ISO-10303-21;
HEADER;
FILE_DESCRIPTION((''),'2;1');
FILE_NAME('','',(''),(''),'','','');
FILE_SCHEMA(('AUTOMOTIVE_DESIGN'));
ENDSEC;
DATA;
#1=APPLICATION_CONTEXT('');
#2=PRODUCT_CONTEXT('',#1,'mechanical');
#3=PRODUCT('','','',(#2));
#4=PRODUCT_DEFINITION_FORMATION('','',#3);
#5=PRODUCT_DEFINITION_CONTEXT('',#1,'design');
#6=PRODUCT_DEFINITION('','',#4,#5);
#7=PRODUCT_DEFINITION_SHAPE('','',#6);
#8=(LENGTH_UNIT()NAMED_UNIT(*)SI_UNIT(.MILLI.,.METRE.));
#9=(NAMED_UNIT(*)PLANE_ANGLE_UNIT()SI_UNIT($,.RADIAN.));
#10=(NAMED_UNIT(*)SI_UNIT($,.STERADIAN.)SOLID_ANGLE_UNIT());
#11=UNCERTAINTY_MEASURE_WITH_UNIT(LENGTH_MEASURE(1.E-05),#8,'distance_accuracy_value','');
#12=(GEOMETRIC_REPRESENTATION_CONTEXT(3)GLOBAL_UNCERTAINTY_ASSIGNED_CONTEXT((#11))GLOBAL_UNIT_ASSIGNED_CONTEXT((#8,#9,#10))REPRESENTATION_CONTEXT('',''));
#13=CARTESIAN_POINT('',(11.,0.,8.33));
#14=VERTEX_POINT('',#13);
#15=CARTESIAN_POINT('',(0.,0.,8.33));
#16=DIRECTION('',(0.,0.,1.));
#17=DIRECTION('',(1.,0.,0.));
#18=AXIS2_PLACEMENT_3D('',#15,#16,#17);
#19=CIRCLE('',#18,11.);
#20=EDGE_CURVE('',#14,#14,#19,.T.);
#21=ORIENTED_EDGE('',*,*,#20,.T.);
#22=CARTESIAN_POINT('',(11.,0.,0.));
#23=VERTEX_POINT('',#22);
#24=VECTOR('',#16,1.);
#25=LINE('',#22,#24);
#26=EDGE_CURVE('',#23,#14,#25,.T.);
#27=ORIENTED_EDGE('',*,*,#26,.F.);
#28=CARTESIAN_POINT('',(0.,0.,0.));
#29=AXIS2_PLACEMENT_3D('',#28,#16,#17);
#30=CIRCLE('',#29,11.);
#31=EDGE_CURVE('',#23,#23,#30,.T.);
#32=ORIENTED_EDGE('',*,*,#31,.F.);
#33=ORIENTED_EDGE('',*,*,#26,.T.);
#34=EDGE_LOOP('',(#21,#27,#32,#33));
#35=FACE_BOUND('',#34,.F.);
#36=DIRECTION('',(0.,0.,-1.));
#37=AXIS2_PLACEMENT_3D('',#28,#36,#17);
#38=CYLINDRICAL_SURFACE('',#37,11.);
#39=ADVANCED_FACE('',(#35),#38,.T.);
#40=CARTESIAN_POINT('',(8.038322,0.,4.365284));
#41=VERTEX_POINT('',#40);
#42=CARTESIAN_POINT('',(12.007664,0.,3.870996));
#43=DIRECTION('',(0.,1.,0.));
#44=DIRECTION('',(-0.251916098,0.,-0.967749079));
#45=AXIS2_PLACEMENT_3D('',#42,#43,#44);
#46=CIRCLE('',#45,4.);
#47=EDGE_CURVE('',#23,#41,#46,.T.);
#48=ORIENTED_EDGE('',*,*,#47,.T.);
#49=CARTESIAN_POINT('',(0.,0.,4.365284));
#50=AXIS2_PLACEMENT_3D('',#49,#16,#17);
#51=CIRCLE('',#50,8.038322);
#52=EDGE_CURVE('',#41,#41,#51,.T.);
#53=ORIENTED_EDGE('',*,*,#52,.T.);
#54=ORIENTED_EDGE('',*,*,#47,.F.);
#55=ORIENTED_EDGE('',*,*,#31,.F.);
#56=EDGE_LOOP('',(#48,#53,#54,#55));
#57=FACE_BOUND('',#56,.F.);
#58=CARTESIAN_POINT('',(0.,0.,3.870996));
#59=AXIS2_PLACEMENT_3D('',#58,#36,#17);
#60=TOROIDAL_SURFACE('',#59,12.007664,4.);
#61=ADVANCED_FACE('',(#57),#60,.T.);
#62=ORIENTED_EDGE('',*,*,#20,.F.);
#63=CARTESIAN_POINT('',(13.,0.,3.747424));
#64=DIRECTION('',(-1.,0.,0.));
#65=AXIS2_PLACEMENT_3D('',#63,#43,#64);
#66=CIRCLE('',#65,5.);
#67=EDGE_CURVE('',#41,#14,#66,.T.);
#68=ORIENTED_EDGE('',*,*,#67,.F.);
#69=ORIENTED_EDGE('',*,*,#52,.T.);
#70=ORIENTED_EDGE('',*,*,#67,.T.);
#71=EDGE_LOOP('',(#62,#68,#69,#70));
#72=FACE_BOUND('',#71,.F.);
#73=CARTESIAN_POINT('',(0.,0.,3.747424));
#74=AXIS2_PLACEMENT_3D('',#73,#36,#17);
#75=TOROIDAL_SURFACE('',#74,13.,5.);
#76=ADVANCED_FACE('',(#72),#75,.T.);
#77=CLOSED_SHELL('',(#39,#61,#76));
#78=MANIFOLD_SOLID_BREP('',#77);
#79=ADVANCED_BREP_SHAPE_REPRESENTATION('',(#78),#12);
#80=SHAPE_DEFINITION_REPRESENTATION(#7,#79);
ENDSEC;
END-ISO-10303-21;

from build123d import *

# Parameters (mm, degrees)
F0_R     = 11
F0_R_2   = 8
F1_DEPTH = 8.33
F2_R     = 11.5325347533
F2_R_2   = 11
F3_DEPTH = 25


# Not quite as in the source:
# - a fillet or chamfer that OpenCascade refuses, or shapes differently, is made with other operations: its cross-section is extruded or revolved along the edge and cut away or added


with BuildPart() as f1:
    # F0 (on Top) → F1 (new body)
    with BuildSketch(Plane.XY):
        Circle(F0_R)
        Circle(F0_R_2, mode=Mode.SUBTRACT)
    extrude(amount=F1_DEPTH)

    # F2 (on face) → F3 (cut)
    with BuildSketch(Plane.XY.offset(8.33)):
        Circle(F2_R)
        Circle(F2_R_2, mode=Mode.SUBTRACT)
    extrude(amount=-F3_DEPTH, mode=Mode.SUBTRACT)

    # F4: fillet of radius 5 on 1 edges, made by hand

    # F4_s1 → F4_t2 (revolve, cut)
    with BuildSketch(Plane.XZ):
        with BuildLine():
            ThreePointArc((8, 3.747424305), (8.8166998673, 6.4860370926), (11, 8.33))
            Line((11, 8.33), (8, 8.33))
            Line((8, 8.33), (8, 3.747424305))
        make_face()
    revolve(axis=Axis((0, 0, 8.33), (0, 0, 1)), mode=Mode.SUBTRACT)

    # F5: fillet of radius 4 on 1 edges, made by hand

    # F5_s1 → F5_t2 (revolve, cut)
    with BuildSketch(Plane.XZ):
        with BuildLine():
            ThreePointArc((11, 0), (8.6975924738, 1.6252394507), (8.0383219615, 4.3652843555))
            Line((8.0383219615, 4.3652843555), (7.6413877184, 4.4147131595))
            ThreePointArc((7.6413877184, 4.4147131595), (7.6, 3.747424305), (7.6, 0))
            Line((7.6, 0), (8, -0.4))
            ThreePointArc((8, -0.4), (9.5, -0.4), (10.8992335608, -0.3870996315))
            Line((10.8992335608, -0.3870996315), (11, 0))
        make_face()
    revolve(axis=Axis((0, 0, 0), (0, 0, 1)), mode=Mode.SUBTRACT)


solid = f1.part
